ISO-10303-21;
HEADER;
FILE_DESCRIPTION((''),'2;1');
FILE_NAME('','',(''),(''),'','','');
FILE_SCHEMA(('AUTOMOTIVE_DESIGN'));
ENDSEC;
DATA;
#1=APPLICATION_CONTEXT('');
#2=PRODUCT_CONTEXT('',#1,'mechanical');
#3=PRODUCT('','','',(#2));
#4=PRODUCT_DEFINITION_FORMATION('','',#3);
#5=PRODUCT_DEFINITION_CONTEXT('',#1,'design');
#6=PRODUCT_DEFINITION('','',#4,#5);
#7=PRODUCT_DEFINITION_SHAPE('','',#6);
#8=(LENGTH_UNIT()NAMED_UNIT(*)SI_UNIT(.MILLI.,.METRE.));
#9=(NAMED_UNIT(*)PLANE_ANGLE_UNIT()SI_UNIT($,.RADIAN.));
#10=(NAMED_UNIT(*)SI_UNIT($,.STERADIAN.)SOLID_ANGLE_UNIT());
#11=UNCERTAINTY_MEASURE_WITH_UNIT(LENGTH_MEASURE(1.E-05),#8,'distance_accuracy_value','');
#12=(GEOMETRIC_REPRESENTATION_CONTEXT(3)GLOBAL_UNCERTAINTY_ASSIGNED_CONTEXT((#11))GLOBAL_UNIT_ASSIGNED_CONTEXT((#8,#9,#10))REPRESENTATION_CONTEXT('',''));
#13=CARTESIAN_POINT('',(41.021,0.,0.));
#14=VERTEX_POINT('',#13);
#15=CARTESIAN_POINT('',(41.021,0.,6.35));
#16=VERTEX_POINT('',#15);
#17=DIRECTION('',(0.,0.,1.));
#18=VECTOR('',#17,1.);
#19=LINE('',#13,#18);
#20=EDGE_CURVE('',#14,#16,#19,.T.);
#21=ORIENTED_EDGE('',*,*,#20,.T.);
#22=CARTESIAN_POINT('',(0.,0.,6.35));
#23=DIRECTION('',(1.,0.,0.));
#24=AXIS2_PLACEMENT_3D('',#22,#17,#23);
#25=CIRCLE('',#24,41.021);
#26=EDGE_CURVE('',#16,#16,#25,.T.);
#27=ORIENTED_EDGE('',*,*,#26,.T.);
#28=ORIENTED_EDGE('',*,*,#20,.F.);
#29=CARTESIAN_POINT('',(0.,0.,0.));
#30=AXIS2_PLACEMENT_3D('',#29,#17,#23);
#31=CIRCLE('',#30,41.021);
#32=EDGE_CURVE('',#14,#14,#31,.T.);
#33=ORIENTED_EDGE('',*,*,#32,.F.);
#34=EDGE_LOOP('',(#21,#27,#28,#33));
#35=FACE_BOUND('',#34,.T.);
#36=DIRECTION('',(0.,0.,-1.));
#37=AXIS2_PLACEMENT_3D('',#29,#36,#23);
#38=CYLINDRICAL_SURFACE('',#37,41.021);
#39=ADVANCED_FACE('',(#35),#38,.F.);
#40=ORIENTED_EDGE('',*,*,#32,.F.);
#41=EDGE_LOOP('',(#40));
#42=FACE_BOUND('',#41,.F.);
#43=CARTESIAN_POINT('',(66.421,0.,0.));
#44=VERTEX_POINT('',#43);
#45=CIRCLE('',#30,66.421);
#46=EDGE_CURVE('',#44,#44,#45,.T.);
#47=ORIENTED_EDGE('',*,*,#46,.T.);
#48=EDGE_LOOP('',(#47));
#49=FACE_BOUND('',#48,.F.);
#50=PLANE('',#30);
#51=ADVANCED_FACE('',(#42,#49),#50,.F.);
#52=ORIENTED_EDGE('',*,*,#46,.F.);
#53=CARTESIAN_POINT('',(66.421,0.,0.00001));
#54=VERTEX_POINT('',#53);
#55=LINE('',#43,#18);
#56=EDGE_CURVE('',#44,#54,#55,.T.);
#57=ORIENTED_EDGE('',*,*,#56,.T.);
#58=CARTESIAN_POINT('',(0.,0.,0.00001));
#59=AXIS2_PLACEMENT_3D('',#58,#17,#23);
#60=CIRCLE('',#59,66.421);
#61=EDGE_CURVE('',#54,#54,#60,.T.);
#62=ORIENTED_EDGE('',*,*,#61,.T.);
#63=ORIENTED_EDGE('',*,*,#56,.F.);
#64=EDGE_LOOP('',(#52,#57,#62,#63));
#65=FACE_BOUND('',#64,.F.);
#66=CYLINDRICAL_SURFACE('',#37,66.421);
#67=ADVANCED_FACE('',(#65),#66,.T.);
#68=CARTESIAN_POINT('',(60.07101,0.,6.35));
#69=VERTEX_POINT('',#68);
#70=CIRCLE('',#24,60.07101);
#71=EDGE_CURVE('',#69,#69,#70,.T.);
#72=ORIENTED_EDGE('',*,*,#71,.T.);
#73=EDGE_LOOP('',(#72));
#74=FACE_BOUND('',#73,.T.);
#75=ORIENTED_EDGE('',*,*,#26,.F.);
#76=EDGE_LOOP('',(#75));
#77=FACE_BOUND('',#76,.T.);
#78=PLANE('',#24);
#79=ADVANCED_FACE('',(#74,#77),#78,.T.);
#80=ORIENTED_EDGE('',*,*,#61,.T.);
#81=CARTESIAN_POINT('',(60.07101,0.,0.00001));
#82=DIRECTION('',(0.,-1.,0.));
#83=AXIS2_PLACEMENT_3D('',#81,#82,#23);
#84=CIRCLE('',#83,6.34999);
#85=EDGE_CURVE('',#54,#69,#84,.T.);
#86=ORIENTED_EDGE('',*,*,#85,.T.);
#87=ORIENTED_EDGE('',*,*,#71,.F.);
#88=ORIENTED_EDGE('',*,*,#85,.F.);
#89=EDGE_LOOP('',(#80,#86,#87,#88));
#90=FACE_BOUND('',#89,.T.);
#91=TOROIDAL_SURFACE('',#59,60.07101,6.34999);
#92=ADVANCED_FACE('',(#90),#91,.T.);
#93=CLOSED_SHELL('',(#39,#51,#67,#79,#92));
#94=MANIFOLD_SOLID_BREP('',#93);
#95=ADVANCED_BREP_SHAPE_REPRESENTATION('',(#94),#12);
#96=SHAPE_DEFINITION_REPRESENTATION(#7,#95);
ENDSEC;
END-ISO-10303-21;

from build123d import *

# Parameters (mm, degrees)
F0_R     = 66.421
F0_R_2   = 41.021
F1_DEPTH = 6.35
F2_R     = 6.34999


# Not quite as in the source:
# - a fillet or chamfer is up to 0.001 mm smaller than in the source, because OpenCascade refuses the exact size


with BuildPart() as f1:
    # F0 (on Top) → F1 (new body)
    with BuildSketch(Plane.XY):
        Circle(F0_R)
        Circle(F0_R_2, mode=Mode.SUBTRACT)
    extrude(amount=F1_DEPTH)

    # F2 (radius 6.35 in the source; OpenCascade refuses exactly that, so slightly less here)
    f2_edges = [f1.edges().sort_by_distance(p)[0] for p in [
        (-66.421, 0, 6.35),
    ]]
    fillet(f2_edges, radius=F2_R)


solid = f1.part
